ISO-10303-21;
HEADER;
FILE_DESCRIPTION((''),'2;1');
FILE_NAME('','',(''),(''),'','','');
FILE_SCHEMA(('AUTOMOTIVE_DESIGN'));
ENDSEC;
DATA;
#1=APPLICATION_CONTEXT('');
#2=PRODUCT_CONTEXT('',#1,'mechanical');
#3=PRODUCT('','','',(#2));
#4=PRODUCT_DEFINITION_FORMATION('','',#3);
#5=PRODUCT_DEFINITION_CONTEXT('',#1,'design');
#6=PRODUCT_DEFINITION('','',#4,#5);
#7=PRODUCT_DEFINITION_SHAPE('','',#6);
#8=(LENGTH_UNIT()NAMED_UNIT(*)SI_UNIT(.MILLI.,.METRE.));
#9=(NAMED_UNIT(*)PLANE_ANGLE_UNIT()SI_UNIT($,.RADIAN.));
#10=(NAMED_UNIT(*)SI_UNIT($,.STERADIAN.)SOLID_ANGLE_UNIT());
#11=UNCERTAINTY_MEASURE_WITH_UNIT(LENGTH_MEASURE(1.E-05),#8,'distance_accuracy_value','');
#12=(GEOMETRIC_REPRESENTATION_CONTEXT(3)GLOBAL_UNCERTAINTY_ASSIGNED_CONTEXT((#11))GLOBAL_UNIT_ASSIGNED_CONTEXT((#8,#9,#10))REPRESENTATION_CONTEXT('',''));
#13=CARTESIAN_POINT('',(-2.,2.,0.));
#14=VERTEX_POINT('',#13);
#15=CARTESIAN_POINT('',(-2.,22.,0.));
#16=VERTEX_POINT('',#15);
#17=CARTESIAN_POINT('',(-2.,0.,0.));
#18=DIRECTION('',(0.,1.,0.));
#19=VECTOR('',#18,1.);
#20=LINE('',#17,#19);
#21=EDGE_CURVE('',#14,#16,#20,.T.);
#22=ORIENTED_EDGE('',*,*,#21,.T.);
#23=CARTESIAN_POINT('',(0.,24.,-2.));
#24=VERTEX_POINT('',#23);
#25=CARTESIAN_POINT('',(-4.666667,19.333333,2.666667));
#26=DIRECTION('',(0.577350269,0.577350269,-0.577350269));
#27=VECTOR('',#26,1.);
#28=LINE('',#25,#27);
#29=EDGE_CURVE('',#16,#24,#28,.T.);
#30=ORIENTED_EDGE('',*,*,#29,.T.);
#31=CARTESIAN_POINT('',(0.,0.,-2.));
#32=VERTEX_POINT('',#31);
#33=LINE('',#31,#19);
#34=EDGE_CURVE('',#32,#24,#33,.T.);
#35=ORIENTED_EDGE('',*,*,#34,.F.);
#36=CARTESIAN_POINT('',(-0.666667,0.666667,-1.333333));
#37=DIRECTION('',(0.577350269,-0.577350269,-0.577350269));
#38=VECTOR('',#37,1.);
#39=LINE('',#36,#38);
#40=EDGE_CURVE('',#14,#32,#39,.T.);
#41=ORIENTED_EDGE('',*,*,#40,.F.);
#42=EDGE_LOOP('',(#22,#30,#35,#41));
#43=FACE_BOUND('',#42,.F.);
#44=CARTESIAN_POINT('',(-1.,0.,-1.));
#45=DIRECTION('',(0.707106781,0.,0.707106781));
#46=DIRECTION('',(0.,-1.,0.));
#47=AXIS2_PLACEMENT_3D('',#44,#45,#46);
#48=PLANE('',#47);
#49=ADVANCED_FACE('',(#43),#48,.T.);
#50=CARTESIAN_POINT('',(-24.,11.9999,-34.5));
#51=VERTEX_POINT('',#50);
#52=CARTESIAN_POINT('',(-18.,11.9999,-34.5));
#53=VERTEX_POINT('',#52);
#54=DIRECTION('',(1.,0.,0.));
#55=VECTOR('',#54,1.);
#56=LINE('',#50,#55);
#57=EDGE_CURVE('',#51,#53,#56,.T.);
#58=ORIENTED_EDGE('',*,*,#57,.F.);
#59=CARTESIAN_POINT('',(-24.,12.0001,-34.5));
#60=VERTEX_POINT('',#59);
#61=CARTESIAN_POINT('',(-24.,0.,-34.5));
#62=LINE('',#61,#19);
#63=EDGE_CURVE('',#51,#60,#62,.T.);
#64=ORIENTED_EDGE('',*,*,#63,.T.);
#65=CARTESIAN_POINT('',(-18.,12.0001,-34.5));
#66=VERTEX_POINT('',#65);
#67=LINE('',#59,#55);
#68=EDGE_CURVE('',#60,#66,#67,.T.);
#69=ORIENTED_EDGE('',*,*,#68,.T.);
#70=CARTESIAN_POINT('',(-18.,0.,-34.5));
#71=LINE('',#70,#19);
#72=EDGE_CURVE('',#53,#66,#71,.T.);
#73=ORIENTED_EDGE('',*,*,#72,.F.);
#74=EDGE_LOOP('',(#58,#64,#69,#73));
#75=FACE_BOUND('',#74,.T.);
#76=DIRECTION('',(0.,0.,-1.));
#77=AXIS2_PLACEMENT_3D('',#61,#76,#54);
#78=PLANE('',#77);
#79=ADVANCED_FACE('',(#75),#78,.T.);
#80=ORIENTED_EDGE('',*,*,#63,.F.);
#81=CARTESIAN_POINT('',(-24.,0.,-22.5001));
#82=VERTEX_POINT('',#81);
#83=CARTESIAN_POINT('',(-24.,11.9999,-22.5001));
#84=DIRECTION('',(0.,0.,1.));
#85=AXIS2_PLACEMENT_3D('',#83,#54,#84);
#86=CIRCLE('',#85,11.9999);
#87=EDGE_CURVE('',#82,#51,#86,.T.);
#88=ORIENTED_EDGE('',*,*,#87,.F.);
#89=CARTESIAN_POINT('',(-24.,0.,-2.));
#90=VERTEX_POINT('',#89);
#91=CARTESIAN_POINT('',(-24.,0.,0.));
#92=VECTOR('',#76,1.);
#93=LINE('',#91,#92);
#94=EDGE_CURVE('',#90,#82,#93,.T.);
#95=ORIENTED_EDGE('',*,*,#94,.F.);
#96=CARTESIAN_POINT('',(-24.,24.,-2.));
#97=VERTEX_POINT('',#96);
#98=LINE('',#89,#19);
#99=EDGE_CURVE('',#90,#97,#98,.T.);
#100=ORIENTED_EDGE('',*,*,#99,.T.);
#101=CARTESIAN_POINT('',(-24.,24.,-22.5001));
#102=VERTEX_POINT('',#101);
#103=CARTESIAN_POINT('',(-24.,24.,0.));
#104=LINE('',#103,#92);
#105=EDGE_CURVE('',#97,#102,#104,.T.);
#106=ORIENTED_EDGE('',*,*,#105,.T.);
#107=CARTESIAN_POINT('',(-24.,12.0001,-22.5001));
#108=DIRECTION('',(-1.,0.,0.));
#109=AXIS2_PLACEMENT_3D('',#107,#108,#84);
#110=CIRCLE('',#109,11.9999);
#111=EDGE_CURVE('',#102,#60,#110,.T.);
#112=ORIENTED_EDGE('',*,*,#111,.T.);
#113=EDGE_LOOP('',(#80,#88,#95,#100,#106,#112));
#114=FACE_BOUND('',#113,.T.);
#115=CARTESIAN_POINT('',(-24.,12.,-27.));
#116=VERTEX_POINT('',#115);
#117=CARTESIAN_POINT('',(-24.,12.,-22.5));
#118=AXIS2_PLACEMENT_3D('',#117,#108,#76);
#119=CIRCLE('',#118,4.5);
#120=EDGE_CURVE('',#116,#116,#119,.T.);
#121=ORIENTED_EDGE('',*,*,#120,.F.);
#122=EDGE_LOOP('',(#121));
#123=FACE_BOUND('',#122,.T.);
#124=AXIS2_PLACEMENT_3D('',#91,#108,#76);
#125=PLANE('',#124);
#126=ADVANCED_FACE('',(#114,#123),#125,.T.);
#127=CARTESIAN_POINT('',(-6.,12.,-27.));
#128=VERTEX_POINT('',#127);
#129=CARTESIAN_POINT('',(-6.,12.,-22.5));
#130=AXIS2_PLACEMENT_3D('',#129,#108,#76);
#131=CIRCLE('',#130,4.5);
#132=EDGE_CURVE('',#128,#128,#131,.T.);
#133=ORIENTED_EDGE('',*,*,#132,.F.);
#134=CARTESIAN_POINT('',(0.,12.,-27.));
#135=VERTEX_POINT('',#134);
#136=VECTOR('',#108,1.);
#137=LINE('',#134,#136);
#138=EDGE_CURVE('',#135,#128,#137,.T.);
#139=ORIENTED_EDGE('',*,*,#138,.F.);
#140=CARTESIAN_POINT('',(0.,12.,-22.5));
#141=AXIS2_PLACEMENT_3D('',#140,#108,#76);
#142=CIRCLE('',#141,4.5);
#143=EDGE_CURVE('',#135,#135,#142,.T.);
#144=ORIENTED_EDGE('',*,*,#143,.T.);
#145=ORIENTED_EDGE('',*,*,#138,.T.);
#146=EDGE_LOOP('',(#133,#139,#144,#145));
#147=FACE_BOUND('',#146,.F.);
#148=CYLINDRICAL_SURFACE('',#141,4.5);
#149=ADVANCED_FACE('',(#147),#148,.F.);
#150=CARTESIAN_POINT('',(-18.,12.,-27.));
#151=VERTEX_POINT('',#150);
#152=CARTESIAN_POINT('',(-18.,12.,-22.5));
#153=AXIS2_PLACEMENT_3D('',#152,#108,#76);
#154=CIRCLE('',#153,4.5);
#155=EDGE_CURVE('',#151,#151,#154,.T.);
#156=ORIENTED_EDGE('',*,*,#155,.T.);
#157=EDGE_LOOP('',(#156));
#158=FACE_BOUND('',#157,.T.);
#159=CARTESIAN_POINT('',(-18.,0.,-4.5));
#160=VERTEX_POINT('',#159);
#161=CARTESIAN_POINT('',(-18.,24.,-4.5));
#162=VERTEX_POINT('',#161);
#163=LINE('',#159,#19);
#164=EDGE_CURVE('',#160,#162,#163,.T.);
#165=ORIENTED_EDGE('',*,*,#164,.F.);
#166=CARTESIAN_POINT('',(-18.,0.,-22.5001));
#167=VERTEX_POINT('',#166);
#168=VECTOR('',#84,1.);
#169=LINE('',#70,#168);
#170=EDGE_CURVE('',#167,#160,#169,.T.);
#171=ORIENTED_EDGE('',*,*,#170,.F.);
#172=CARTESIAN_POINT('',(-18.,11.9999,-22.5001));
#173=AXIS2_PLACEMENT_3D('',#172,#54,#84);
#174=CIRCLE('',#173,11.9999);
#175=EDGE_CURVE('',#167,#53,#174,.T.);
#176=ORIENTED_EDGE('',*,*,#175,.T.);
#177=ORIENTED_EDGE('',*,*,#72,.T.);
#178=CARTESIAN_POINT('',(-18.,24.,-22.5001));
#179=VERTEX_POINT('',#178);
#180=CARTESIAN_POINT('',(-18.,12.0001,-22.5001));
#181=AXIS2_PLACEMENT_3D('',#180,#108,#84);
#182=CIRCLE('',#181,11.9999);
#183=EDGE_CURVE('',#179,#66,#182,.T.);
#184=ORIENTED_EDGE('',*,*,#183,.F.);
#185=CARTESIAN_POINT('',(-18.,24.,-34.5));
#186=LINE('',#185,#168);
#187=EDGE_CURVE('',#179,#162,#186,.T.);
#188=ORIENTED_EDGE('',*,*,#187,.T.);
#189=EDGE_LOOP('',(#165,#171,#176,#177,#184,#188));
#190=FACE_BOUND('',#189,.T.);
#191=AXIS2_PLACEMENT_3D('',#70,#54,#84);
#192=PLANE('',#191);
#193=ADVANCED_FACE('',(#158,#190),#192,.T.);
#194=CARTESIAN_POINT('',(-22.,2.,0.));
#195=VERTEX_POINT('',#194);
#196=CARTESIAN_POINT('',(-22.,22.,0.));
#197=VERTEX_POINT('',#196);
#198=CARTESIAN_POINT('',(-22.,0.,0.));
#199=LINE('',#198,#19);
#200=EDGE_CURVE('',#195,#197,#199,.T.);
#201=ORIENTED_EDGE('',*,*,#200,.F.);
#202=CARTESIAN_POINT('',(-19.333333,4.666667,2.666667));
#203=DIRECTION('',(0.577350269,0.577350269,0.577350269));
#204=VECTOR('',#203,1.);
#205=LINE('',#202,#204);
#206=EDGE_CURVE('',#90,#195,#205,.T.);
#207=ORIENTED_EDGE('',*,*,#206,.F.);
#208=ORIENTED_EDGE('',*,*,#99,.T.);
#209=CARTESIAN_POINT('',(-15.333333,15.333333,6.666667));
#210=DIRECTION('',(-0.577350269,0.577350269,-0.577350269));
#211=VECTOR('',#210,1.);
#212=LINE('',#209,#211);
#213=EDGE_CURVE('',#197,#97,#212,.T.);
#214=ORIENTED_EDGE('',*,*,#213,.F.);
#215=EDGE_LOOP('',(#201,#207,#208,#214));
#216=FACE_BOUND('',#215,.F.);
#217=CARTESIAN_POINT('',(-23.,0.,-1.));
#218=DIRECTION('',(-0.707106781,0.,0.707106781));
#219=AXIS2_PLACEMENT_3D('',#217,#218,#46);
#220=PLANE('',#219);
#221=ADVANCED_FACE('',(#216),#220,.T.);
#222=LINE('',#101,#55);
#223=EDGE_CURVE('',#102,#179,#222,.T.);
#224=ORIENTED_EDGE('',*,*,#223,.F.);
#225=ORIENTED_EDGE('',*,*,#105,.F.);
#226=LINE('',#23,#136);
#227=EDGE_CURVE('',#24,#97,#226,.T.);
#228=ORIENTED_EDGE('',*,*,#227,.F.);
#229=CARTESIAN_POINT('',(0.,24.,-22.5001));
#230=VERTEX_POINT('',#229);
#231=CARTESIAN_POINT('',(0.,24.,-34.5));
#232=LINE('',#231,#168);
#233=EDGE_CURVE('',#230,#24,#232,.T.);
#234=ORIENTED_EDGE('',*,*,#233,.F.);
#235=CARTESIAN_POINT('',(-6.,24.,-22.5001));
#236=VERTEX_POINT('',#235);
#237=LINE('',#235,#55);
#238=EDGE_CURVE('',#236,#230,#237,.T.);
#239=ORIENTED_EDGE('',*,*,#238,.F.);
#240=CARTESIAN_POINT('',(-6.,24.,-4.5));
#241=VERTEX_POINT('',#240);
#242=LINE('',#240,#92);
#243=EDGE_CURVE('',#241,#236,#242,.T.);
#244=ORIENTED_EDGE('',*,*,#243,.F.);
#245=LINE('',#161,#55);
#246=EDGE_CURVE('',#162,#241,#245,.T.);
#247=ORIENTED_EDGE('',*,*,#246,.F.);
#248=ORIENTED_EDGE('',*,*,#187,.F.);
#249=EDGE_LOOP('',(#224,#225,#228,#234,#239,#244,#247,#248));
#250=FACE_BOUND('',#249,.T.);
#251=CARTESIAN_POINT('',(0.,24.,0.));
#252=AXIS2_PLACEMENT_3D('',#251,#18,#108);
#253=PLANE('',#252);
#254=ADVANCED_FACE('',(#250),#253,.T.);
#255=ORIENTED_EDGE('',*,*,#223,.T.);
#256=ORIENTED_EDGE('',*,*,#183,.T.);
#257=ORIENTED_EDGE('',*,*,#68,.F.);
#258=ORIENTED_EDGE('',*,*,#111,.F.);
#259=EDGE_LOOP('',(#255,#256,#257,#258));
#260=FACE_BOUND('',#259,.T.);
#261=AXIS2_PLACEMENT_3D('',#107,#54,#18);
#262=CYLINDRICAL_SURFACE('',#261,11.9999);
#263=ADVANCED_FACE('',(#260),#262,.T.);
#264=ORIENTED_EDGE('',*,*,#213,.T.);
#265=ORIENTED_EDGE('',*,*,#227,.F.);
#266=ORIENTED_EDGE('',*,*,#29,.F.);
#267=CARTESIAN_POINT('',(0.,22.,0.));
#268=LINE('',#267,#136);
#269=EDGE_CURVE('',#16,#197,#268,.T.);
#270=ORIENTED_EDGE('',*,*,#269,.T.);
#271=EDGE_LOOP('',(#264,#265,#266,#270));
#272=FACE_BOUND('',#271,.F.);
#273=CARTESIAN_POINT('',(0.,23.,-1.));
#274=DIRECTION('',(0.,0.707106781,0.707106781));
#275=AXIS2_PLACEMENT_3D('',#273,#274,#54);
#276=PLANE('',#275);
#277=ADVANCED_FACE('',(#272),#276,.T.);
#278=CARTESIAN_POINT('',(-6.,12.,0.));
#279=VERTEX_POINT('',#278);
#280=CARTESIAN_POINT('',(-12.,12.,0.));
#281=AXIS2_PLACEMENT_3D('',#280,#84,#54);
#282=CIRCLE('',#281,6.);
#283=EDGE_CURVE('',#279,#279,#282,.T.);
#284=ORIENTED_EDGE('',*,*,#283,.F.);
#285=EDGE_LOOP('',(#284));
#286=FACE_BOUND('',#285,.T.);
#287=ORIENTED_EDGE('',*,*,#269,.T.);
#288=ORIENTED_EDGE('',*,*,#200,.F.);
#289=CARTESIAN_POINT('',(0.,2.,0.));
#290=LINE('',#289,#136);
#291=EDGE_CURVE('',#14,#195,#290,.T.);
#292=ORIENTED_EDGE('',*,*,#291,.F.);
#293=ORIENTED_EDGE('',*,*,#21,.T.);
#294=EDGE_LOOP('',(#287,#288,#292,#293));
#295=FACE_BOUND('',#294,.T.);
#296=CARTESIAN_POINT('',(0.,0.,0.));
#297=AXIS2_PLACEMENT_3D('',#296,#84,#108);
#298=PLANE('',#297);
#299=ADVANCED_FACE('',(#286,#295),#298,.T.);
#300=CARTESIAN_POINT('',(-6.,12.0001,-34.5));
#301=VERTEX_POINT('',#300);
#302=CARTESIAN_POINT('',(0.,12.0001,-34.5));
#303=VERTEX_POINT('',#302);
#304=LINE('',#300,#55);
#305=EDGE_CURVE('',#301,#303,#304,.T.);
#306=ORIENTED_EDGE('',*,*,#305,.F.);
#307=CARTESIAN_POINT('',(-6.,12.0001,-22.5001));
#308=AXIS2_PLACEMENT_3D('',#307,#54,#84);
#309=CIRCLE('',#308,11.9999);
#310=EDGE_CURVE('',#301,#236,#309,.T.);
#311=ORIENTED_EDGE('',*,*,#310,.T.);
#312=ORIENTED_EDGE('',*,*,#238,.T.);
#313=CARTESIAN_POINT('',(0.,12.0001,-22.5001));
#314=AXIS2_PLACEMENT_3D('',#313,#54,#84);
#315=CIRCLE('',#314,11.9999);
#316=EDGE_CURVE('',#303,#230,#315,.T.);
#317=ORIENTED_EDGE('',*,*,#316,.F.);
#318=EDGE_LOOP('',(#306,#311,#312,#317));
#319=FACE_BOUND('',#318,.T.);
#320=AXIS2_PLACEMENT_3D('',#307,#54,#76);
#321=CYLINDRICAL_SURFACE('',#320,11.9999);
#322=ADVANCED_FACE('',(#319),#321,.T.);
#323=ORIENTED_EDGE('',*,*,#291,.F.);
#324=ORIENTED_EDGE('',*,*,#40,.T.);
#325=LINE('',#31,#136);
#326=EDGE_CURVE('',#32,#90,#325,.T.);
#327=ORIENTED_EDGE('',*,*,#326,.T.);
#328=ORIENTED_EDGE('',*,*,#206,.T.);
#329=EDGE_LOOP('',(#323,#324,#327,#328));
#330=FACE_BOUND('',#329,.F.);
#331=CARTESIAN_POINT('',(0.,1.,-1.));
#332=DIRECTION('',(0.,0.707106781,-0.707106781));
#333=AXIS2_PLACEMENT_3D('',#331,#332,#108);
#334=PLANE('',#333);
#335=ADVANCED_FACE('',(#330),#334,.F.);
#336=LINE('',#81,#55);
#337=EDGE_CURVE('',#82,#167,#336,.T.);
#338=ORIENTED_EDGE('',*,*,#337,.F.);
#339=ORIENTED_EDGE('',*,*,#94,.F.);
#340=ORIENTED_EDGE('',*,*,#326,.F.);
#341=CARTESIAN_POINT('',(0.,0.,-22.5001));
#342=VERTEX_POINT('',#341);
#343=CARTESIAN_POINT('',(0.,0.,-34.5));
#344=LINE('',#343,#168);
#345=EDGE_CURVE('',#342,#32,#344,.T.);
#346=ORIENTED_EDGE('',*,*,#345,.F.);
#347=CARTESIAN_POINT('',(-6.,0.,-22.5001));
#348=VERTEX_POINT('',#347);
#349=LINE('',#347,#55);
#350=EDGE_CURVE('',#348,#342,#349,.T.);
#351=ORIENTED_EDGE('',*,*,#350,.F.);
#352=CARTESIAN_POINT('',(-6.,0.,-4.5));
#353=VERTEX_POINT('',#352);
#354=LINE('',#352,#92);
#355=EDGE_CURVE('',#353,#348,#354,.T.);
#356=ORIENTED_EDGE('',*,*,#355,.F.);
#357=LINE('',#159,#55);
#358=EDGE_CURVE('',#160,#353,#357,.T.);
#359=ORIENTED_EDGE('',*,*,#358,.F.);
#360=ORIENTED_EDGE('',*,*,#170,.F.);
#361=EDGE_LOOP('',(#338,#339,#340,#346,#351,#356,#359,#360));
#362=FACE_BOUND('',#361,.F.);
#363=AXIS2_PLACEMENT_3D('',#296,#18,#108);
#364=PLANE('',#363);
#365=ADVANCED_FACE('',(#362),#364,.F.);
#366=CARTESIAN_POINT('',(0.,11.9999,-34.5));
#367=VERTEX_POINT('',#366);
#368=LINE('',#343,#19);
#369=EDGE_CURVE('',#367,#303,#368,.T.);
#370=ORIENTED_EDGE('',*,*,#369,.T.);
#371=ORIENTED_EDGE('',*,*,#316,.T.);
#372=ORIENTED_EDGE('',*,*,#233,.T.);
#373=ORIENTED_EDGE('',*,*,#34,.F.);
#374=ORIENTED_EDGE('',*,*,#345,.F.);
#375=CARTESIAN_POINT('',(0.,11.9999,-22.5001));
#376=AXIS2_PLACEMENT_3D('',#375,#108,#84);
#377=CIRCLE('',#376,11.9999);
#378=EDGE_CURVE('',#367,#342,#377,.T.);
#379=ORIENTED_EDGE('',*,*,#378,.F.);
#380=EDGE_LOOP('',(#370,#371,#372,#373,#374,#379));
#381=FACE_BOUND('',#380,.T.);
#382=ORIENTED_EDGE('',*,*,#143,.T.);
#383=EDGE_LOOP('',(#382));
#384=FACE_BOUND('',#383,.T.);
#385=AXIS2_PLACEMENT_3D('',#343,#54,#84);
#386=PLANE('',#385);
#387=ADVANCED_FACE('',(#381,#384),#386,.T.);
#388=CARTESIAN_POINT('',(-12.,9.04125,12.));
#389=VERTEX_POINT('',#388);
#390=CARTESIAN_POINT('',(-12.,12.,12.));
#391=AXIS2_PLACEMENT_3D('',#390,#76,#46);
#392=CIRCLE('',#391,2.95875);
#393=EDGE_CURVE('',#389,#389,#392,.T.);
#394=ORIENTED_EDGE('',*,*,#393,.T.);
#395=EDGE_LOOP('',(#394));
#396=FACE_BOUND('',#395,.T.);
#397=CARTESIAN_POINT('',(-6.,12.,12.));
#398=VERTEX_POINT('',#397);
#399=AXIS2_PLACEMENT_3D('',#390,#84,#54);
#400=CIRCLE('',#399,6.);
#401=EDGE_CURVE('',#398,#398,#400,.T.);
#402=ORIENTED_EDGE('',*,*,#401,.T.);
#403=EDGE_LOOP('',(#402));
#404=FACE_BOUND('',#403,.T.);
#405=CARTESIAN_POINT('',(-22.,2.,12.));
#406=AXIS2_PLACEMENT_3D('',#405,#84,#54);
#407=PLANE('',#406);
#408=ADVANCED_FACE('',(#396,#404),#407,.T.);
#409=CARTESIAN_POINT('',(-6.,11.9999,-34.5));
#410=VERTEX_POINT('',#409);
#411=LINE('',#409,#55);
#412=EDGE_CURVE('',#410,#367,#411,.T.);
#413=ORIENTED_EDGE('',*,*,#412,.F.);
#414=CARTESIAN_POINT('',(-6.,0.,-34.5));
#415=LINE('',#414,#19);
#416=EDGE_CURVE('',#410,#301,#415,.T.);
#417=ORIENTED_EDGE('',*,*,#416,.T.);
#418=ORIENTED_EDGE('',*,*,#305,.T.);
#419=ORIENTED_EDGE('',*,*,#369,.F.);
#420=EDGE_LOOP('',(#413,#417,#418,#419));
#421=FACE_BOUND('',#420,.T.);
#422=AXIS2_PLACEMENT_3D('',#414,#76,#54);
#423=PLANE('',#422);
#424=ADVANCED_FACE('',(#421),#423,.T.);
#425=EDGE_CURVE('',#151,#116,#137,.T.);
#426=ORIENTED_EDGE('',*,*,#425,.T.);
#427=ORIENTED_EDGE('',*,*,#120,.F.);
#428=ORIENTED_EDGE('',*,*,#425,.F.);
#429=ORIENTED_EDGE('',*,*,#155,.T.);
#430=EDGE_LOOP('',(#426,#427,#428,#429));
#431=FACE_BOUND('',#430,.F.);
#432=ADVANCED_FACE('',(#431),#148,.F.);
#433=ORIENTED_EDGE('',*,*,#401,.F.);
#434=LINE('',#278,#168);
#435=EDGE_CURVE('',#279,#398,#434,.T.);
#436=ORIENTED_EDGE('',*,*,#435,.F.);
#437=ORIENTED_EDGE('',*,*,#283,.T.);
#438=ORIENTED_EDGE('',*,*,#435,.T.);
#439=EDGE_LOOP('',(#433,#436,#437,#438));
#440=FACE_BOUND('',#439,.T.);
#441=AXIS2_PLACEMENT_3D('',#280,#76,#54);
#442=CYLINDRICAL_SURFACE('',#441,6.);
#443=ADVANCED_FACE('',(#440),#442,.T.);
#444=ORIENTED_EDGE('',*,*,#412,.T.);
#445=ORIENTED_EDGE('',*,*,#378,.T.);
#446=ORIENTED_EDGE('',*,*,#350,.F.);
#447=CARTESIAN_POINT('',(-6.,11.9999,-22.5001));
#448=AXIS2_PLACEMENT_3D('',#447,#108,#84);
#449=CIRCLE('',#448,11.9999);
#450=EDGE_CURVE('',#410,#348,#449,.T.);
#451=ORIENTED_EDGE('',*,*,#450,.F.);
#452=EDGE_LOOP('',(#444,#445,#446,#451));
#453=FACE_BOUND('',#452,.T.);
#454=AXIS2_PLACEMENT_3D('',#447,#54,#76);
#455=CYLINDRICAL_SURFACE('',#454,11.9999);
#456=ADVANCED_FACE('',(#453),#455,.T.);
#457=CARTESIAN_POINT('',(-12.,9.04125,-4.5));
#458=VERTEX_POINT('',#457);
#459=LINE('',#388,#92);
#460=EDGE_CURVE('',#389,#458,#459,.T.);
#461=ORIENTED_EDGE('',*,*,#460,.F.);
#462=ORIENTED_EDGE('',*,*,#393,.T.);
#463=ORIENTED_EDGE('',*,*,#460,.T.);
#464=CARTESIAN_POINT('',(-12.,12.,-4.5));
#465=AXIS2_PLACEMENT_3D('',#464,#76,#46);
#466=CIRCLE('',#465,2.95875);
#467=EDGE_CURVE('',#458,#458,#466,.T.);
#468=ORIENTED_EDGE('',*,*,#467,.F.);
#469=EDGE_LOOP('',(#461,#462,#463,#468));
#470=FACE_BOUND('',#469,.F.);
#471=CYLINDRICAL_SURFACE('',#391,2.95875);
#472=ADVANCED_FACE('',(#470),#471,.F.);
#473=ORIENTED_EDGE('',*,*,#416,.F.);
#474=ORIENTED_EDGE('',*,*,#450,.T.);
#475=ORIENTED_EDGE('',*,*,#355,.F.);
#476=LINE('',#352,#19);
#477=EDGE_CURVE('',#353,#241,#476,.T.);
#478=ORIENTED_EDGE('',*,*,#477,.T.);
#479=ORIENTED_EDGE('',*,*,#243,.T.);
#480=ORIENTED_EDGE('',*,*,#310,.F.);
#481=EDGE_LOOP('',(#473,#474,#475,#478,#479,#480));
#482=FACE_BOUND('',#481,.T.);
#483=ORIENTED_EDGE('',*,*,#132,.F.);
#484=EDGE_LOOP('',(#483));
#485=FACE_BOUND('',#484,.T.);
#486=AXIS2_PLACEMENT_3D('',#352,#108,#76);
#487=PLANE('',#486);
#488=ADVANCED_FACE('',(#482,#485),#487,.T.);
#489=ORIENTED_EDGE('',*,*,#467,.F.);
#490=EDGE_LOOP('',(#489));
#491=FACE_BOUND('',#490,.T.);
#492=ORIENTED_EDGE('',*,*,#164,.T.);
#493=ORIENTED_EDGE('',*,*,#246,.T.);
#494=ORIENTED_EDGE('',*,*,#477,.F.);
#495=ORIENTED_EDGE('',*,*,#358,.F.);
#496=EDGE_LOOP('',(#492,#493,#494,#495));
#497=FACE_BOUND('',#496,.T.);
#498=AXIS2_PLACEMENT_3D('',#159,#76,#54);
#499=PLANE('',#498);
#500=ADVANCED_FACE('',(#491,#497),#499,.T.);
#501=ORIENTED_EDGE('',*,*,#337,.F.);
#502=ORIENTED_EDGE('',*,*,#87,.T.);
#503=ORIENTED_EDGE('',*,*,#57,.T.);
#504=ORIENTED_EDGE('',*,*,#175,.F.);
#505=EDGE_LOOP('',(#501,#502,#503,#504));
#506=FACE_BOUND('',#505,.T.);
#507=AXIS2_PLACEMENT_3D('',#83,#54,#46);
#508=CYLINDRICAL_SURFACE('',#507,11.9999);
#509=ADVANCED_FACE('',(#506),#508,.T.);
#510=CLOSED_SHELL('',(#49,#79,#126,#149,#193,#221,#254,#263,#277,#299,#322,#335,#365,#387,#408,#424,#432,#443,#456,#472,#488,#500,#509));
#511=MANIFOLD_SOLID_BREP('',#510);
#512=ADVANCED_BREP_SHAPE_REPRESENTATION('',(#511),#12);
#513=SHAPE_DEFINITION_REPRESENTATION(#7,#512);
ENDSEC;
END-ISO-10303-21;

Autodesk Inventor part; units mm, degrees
ref_plane "YZ Plane" through (0, 0, 0) normal (1, 0, 0) x (0, 1, 0)
ref_plane "XZ Plane" through (0, 0, 0) normal (0, 1, 0) x (-1, 0, 0)
ref_plane "XY Plane" through (0, 0, 0) normal (0, 0, 1) x (1, 0, 0)
sketch "Skizze1" plane through (0, 0, 0) normal (0, 1, 0) x (-1, 0, 0)
  line L0 (0, 0) -> (24, 0)
  line L1 (24, 0) -> (24, -34.5)
  line L2 (24, -34.5) -> (18, -34.5)
  line L3 (18, -34.5) -> (18, -4.5)
  line L4 (18, -4.5) -> (6, -4.5)
  line L5 (6, -4.5) -> (6, -34.5)
  line L6 (6, -34.5) -> (0, -34.5)
  line L7 (0, -34.5) -> (0, 0)
  dimension "d0" = 6
  dimension "d1" = 6
  dimension "d2" = 12
  dimension "d3" = 30
  dimension "d4" = 4.5
extrude "Extrusion1" add sketch "Skizze1" along normal blind 24
fillet "Rundung1" radius 12 2 edges at (-3, 24, -34.5) (-3, 0, -34.5)
fillet "Rundung2" radius 12 2 edges at (-21, 0, -34.5) (-21, 24, -34.5)
sketch "Skizze2" plane through (0, 0, 0) normal (1, 0, 0) x (0, 0, -1)
  arc A0 (22.5, 0) -> (22.5, 24) centre (22.5, 12) ccw projected
  point P0 (0, 0)
hole "Bohrung1" at (0, 12, -22.5) direction (-1, 0, 0) diameter 9 depth 24
chamfer "Fasen1" distance 2 angle 45 4 edges at (-12, 24, 0) (0, 12, 0) (-12, 0, 0) (-24, 12, 0)
sketch "Skizze3" plane through (-22, 2, 0) normal (0, 0, 1) x (1, 0, 0)
  circle A0 centre (10, 10) radius 6
  line L0 (-2, 22) -> (-2, -2) projected
  line L1 (0, 20) -> (20, 20) projected
  point P0 (22, -2)
  point P1 (-2, 10)
  point P2 (10, 20)
  dimension "d19" = 12
extrude "Extrusion2" add sketch "Skizze3" along normal blind 12
sketch "Skizze4" plane through (-12, 12, 12) normal (0, 0, 1) x (1, 0, 0)
  circle A0 centre (0, 0) radius 6 projected
  point P0 (12, -12)
hole "Bohrung2" at (-12, 12, 12) direction (0, 0, -1) diameter 5.9175 depth 16.5 tip angle 118 thread size "M7x1" class "6H" standard "ISO Metric profile"
properties part number "top_cylinder" material "Glasfaserbeton"
